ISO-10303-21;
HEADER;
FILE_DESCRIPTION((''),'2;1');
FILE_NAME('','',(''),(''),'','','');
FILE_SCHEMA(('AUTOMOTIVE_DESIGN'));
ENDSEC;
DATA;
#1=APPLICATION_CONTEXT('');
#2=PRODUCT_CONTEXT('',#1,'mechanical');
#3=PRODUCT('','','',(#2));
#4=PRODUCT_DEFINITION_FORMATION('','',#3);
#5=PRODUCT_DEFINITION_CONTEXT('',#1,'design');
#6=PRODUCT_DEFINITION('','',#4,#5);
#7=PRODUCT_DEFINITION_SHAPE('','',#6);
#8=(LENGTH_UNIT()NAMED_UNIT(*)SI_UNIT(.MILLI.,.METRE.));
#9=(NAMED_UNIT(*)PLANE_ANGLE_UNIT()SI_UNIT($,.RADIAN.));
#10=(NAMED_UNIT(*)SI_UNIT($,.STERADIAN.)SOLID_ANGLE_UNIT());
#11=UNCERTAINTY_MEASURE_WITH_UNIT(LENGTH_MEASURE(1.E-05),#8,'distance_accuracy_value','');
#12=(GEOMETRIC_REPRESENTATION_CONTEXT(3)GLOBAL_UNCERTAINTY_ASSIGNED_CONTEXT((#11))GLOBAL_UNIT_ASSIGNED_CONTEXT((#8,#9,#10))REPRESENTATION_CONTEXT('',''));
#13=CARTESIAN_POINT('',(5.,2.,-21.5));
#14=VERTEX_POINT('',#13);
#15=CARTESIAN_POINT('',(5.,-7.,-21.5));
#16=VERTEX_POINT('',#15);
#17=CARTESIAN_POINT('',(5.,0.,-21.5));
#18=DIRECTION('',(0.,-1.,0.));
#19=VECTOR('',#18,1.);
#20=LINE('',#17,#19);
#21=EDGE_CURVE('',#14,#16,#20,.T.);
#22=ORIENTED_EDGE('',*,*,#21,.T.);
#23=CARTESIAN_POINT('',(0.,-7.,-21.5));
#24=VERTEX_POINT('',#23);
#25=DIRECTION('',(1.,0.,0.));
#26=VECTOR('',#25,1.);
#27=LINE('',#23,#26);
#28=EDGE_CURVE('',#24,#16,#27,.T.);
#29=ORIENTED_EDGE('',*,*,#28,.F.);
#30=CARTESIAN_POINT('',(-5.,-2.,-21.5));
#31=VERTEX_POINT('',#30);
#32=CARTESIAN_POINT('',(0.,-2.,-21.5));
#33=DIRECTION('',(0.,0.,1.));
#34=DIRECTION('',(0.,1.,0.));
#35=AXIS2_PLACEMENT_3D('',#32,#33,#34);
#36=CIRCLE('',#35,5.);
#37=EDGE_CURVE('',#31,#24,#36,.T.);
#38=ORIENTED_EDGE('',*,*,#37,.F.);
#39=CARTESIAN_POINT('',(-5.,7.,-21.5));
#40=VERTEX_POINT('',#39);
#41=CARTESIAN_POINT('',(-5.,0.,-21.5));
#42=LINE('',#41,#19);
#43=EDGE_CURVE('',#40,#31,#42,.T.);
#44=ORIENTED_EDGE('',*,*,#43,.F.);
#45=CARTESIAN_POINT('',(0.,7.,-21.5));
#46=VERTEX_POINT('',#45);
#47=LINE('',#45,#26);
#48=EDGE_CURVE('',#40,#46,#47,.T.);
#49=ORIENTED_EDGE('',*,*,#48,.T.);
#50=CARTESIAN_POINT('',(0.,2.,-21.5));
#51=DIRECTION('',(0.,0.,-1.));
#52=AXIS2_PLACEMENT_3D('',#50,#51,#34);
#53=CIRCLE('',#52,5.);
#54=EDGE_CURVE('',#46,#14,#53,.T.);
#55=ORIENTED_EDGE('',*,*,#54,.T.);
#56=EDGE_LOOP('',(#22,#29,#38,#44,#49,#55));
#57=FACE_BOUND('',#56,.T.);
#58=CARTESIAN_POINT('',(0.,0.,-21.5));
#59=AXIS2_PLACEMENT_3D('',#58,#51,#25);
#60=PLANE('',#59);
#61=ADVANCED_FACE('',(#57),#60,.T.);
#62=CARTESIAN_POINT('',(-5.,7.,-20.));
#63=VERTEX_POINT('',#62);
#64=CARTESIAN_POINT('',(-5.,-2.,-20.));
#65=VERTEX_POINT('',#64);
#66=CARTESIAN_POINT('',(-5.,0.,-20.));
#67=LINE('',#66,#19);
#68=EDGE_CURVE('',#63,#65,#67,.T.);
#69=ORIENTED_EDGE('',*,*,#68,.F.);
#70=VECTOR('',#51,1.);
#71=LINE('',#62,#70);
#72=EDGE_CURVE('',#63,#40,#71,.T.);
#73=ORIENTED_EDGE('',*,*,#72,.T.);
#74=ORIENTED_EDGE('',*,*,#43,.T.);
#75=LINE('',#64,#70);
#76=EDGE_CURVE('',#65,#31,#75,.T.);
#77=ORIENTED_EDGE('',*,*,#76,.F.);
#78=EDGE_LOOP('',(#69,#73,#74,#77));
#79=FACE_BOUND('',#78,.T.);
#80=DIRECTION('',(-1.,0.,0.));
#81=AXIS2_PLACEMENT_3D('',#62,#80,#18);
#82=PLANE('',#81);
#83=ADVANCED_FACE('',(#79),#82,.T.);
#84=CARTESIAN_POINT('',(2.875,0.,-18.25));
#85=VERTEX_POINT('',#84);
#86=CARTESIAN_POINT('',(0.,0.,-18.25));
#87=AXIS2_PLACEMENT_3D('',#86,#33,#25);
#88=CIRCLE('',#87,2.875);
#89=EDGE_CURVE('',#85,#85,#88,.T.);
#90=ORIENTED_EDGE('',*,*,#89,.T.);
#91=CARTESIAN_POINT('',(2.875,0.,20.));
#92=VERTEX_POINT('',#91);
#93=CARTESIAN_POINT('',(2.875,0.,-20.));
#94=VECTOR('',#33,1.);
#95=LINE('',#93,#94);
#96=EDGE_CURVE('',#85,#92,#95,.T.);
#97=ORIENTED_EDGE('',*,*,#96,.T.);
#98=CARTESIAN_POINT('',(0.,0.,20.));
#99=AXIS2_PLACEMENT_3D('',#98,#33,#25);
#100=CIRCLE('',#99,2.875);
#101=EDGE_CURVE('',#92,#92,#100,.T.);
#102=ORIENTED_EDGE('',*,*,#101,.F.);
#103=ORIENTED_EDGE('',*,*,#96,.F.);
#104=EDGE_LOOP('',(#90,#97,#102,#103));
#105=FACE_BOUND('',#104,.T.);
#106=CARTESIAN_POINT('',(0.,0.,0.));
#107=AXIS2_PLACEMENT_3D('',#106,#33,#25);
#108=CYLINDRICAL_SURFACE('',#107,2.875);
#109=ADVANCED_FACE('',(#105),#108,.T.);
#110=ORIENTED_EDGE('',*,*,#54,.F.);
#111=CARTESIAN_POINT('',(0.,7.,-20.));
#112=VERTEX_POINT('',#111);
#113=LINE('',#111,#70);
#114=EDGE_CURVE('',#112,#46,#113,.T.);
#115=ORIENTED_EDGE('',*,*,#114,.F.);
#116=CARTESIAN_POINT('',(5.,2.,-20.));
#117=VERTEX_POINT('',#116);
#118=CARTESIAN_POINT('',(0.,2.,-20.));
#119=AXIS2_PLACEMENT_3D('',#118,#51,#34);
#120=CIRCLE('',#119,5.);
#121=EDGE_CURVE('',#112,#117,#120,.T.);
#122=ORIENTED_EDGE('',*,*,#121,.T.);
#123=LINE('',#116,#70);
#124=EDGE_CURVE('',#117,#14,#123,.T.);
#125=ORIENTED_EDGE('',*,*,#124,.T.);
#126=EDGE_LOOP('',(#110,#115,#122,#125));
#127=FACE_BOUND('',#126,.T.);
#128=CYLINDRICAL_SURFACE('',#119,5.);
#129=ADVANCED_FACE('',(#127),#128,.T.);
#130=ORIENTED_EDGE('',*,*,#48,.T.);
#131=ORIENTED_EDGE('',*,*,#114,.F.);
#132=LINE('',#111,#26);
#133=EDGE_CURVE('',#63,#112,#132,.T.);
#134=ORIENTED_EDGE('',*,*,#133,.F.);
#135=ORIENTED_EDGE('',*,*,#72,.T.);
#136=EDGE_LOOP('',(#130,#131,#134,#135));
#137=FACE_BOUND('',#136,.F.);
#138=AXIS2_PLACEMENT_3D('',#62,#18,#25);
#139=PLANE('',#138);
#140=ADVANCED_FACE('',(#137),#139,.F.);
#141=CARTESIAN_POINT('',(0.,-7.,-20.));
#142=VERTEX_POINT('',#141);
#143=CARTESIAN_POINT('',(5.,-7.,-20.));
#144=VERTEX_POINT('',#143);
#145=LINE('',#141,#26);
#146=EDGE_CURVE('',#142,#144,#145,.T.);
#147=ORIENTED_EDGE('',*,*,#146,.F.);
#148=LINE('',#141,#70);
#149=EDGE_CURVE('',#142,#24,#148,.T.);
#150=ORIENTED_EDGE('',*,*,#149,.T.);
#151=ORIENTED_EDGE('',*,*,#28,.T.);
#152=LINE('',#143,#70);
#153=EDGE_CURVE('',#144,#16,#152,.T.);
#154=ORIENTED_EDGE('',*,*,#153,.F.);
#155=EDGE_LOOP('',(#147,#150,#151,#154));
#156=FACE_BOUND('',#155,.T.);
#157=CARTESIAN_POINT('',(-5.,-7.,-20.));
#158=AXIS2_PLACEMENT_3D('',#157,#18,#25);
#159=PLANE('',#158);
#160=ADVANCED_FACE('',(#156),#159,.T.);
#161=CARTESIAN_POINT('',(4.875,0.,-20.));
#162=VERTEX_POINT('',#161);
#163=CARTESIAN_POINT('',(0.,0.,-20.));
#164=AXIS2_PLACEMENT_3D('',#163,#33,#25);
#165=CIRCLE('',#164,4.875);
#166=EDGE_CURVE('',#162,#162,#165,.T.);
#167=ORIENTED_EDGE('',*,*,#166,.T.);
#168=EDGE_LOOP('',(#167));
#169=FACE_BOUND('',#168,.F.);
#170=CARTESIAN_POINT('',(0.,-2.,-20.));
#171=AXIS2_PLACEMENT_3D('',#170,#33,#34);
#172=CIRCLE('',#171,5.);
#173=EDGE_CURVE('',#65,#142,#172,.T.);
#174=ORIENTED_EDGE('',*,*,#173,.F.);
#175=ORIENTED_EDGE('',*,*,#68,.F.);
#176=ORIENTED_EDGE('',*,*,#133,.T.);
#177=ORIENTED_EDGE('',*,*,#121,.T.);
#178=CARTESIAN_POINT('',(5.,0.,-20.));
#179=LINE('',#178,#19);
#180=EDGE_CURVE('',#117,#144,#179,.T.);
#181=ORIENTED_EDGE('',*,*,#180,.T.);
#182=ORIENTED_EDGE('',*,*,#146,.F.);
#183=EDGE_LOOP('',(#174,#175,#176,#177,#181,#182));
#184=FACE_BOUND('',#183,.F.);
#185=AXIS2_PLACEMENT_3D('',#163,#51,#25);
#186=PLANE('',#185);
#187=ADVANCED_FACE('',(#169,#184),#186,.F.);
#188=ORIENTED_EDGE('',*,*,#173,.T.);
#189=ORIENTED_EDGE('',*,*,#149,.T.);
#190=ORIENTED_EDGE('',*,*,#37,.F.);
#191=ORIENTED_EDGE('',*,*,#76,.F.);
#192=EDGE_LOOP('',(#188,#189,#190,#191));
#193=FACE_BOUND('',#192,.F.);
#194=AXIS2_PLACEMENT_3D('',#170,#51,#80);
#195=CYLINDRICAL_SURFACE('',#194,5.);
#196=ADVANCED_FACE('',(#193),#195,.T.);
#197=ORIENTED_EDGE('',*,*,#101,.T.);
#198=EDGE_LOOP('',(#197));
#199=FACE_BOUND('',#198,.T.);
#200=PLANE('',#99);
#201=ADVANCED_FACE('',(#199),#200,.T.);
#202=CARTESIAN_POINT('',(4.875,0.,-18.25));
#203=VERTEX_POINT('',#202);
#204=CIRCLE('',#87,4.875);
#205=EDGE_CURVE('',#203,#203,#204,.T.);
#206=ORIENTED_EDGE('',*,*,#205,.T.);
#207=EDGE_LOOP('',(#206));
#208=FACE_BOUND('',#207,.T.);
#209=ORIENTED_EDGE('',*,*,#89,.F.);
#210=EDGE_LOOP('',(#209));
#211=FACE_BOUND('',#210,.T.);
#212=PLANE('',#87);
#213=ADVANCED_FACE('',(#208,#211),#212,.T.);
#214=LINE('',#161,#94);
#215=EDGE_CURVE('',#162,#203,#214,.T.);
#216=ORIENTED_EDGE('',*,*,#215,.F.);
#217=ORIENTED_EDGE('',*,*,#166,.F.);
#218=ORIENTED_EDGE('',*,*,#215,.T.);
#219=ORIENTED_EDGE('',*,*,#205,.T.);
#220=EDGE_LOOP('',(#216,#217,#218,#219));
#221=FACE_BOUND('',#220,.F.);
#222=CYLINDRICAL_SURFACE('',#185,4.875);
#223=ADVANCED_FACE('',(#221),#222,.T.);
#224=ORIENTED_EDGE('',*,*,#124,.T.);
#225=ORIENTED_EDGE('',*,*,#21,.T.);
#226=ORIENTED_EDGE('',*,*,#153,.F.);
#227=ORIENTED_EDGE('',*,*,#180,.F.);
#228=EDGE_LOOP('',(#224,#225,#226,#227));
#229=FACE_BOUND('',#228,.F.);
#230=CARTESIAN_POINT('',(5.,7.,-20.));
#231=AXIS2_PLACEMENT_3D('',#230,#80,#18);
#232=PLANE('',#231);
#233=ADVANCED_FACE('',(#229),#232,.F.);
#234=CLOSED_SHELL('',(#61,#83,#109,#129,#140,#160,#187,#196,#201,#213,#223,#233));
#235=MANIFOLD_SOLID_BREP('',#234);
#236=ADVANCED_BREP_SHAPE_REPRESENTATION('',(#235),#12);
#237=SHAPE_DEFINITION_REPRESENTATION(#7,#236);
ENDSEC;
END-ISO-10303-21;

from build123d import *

# Parameters (mm, degrees)
F0_R     = 2.875
F1_DEPTH = 20
F2_W     = 10
F2_H     = 14
F2_R     = 2.875
F3_DEPTH = 1.5
F4_R     = 5
F5_R     = 4.875
F5_R_2   = 2.875
F6_DEPTH = 1.75


with BuildPart() as f1:
    # F0 (on Top) → F1 (new body, symmetric)
    with BuildSketch(Plane.XY):
        Circle(F0_R)
    extrude(amount=F1_DEPTH, both=True)

    # F2 (on face) → F3 (join)
    with BuildSketch(Plane(origin=(0, 0, -20), x_dir=(1, 0, 0), z_dir=(0, 0, -1))):
        Rectangle(F2_W, F2_H)
        Circle(F2_R, mode=Mode.SUBTRACT)
        Circle(F2_R)
    extrude(amount=F3_DEPTH)

    # F4
    f4_edges = [f1.edges().sort_by_distance(p)[0] for p in [
        (-5, -7, -20.75),
        (5, 7, -20.75),
    ]]
    fillet(f4_edges, radius=F4_R)

    # F5 (on face) → F6 (join)
    with BuildSketch(Plane.XY.offset(-20)):
        Circle(F5_R)
        Circle(F5_R_2, mode=Mode.SUBTRACT)
    extrude(amount=F6_DEPTH)


solid = f1.part
